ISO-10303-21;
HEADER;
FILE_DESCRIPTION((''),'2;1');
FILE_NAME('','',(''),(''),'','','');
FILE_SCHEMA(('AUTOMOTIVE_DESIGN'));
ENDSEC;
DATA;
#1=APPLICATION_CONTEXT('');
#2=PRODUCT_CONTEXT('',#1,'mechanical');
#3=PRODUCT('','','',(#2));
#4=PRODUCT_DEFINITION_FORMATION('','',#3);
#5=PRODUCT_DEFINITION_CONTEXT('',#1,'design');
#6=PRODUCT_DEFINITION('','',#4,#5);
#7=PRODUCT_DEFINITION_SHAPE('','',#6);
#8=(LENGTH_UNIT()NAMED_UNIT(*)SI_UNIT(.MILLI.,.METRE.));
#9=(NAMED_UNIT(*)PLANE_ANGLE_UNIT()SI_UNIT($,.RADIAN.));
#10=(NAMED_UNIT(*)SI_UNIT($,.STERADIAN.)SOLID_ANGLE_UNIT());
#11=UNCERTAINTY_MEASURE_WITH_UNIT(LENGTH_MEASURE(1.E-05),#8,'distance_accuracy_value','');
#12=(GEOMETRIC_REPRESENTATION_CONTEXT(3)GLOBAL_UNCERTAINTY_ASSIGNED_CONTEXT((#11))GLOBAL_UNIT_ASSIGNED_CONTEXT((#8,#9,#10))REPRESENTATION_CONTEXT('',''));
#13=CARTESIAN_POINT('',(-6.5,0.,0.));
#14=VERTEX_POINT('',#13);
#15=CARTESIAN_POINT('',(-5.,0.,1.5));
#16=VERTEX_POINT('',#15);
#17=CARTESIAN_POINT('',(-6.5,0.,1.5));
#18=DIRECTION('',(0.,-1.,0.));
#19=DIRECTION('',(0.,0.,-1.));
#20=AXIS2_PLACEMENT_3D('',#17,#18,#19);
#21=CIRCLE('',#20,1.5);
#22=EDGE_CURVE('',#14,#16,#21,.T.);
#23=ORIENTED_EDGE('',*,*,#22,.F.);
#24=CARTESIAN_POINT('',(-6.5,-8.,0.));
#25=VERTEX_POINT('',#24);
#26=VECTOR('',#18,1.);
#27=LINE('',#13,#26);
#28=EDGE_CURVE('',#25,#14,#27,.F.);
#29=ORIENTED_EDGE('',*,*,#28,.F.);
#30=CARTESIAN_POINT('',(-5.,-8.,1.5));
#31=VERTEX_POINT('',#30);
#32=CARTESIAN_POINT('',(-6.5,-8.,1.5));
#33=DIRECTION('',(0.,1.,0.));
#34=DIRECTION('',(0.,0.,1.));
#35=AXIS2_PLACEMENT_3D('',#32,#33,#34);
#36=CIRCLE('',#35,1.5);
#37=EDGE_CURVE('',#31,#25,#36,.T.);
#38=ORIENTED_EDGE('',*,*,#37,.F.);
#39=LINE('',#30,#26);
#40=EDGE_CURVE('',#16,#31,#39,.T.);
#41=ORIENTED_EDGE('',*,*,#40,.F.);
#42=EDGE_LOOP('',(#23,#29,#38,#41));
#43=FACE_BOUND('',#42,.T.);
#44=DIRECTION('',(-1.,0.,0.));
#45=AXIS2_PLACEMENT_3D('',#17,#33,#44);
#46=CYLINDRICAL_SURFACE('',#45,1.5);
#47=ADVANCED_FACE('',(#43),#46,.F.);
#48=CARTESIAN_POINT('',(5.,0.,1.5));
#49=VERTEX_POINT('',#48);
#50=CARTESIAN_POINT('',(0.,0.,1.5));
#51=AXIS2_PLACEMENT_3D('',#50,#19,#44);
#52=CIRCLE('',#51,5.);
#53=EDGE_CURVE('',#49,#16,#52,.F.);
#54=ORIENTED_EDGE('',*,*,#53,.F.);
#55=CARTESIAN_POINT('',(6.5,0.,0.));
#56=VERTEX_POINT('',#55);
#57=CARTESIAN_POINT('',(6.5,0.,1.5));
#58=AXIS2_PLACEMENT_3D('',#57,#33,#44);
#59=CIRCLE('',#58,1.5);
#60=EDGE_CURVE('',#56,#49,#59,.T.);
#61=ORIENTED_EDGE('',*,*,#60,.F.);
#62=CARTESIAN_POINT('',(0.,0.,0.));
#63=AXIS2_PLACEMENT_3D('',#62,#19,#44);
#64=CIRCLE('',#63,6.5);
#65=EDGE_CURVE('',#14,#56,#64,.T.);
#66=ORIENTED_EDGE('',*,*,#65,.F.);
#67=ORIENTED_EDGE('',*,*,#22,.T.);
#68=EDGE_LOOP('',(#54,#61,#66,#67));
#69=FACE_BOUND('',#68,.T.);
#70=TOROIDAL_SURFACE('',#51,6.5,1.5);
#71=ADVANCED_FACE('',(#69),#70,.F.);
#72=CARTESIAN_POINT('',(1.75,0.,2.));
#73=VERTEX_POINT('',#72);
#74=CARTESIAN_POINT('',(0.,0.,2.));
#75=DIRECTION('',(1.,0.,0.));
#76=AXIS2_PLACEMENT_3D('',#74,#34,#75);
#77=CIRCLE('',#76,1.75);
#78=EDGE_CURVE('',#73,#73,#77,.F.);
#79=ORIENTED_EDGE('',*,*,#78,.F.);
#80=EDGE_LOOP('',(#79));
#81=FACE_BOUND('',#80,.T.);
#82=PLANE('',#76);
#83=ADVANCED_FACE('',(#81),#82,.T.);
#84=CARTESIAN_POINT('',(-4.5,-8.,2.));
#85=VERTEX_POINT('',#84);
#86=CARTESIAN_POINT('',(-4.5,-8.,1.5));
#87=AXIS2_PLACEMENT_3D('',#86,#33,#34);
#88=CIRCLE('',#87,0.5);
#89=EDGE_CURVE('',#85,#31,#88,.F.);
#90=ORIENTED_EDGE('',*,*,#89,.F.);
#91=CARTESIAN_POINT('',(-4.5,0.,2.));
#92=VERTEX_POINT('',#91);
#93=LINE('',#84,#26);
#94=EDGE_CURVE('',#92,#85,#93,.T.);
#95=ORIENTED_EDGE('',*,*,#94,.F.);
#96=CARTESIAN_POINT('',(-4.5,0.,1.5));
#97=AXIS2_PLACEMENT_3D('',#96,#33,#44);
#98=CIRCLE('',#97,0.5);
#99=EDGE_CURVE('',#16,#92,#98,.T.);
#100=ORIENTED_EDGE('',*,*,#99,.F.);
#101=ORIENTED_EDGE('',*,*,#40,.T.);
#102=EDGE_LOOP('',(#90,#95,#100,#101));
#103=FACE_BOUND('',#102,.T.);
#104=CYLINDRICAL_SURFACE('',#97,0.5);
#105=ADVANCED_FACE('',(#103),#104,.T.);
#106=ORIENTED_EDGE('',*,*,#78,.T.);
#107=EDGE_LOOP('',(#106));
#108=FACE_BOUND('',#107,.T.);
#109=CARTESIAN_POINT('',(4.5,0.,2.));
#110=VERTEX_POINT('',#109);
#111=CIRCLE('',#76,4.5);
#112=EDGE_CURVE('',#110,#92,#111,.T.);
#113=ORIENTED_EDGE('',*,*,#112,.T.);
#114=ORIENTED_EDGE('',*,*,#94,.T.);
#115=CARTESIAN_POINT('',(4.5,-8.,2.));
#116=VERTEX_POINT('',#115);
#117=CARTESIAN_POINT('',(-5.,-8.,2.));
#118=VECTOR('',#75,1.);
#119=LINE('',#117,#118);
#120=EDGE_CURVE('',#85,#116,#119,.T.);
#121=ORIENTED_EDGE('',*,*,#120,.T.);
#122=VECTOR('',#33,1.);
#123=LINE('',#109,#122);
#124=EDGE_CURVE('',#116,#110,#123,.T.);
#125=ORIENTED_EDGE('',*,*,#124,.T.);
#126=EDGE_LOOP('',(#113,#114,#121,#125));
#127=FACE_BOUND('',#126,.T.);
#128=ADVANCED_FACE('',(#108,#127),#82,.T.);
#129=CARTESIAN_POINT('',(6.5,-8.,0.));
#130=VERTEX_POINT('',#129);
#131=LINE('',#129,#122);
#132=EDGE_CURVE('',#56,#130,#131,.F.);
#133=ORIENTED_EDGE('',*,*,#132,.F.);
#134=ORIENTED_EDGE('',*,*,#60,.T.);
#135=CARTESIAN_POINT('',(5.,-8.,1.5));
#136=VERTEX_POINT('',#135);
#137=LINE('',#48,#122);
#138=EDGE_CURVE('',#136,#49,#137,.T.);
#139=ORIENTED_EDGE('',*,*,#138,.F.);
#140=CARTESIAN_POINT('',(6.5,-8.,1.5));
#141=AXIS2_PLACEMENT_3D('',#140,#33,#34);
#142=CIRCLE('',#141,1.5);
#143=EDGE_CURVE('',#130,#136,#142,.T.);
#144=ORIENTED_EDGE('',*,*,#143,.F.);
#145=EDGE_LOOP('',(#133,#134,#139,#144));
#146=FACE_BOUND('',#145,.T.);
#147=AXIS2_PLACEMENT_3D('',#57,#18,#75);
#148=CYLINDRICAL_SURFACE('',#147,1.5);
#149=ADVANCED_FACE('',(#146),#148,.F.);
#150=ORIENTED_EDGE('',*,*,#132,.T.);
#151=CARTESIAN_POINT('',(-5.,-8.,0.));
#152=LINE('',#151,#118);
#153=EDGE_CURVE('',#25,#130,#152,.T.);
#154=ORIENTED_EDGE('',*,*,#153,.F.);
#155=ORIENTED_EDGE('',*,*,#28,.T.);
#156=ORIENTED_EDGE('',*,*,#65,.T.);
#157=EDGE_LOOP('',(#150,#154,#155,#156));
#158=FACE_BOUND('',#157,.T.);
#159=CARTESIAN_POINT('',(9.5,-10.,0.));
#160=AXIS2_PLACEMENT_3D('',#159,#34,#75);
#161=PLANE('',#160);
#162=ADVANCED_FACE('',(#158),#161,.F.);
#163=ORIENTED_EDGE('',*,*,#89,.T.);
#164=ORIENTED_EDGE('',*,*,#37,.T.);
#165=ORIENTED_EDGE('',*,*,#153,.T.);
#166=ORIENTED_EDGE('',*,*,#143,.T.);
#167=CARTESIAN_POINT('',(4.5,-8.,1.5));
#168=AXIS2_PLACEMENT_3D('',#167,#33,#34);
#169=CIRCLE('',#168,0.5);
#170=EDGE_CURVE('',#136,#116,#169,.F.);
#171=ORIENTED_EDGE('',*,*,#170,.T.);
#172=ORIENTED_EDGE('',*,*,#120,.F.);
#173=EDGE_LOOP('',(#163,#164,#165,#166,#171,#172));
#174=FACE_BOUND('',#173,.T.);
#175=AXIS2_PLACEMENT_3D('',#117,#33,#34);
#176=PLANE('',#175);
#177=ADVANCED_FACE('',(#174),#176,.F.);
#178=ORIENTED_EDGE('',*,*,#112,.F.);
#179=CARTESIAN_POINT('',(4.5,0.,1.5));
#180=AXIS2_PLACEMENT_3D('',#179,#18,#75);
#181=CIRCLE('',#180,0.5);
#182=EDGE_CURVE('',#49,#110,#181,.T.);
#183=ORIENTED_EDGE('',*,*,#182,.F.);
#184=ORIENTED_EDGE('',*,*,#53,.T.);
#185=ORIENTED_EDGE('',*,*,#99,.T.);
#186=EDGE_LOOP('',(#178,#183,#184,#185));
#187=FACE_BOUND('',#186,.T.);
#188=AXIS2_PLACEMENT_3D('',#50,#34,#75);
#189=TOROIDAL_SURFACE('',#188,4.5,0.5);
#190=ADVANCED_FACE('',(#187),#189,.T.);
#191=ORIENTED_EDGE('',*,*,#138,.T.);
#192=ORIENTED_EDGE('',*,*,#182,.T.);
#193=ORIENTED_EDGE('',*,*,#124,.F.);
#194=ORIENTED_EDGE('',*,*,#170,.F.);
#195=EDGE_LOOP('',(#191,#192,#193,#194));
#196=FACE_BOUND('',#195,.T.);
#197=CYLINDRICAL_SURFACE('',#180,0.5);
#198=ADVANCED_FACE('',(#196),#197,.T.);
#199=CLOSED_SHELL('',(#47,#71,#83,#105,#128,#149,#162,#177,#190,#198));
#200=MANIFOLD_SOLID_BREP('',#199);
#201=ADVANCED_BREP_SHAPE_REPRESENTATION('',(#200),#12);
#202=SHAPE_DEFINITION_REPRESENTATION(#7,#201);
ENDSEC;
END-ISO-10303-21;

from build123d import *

# Parameters (mm, degrees)
EXTRUDE_1_DEPTH     = 2
SKETCH_2_W          = 17
SKETCH_2_H          = 17
EXTRUDE_2_DEPTH     = 5
FILLET_1_R          = 1.5
FILLET_2_R          = 0.5
SKETCH_3_W          = 5
SKETCH_3_H          = 17
CUT_EXTRUDE_4_DEPTH = 21.346989949


with BuildPart() as part:
    # 草图1 → 凸台-拉伸1 (new body)
    with BuildSketch(Plane.XY):
        with BuildLine():
            Line((-5, 0), (-5, -8))
            Line((-5, -8), (5, -8))
            Line((5, -8), (5, 0))
            ThreePointArc((5, 0), (0, 5), (-5, 0))
        make_face()
    extrude(amount=EXTRUDE_1_DEPTH)

    # 草图2 → 凸台-拉伸2 (add)
    with BuildSketch(Plane(origin=(0, 0, 0), x_dir=(-1, 0, 0), z_dir=(0, 0, -1))):
        with Locations((-1, -1.5)):
            Rectangle(SKETCH_2_W, SKETCH_2_H)
    extrude(amount=EXTRUDE_2_DEPTH)

    # 圆角1
    fillet_1_edges = [part.edges().sort_by_distance(p)[0] for p in [
        (5, -4, 0),
        (-5, -4, 0),
        (0, 5, 0),
    ]]
    fillet(fillet_1_edges, radius=FILLET_1_R)

    # 圆角2
    fillet_2_edges = [part.edges().sort_by_distance(p)[0] for p in [
        (5, -4, 2),
        (-5, -4, 2),
        (0, 5, 2),
    ]]
    fillet(fillet_2_edges, radius=FILLET_2_R - 0.0001)  # a hair under: the kernel refuses the full size

    # 草图3 → 切除-拉伸4 (cut, through all)
    with BuildSketch(Plane.ZY.offset(7.5)):
        with Locations((-2.5, -1.5)):
            Rectangle(SKETCH_3_W, SKETCH_3_H)
    extrude(amount=-CUT_EXTRUDE_4_DEPTH, mode=Mode.SUBTRACT)


solid = part.part
